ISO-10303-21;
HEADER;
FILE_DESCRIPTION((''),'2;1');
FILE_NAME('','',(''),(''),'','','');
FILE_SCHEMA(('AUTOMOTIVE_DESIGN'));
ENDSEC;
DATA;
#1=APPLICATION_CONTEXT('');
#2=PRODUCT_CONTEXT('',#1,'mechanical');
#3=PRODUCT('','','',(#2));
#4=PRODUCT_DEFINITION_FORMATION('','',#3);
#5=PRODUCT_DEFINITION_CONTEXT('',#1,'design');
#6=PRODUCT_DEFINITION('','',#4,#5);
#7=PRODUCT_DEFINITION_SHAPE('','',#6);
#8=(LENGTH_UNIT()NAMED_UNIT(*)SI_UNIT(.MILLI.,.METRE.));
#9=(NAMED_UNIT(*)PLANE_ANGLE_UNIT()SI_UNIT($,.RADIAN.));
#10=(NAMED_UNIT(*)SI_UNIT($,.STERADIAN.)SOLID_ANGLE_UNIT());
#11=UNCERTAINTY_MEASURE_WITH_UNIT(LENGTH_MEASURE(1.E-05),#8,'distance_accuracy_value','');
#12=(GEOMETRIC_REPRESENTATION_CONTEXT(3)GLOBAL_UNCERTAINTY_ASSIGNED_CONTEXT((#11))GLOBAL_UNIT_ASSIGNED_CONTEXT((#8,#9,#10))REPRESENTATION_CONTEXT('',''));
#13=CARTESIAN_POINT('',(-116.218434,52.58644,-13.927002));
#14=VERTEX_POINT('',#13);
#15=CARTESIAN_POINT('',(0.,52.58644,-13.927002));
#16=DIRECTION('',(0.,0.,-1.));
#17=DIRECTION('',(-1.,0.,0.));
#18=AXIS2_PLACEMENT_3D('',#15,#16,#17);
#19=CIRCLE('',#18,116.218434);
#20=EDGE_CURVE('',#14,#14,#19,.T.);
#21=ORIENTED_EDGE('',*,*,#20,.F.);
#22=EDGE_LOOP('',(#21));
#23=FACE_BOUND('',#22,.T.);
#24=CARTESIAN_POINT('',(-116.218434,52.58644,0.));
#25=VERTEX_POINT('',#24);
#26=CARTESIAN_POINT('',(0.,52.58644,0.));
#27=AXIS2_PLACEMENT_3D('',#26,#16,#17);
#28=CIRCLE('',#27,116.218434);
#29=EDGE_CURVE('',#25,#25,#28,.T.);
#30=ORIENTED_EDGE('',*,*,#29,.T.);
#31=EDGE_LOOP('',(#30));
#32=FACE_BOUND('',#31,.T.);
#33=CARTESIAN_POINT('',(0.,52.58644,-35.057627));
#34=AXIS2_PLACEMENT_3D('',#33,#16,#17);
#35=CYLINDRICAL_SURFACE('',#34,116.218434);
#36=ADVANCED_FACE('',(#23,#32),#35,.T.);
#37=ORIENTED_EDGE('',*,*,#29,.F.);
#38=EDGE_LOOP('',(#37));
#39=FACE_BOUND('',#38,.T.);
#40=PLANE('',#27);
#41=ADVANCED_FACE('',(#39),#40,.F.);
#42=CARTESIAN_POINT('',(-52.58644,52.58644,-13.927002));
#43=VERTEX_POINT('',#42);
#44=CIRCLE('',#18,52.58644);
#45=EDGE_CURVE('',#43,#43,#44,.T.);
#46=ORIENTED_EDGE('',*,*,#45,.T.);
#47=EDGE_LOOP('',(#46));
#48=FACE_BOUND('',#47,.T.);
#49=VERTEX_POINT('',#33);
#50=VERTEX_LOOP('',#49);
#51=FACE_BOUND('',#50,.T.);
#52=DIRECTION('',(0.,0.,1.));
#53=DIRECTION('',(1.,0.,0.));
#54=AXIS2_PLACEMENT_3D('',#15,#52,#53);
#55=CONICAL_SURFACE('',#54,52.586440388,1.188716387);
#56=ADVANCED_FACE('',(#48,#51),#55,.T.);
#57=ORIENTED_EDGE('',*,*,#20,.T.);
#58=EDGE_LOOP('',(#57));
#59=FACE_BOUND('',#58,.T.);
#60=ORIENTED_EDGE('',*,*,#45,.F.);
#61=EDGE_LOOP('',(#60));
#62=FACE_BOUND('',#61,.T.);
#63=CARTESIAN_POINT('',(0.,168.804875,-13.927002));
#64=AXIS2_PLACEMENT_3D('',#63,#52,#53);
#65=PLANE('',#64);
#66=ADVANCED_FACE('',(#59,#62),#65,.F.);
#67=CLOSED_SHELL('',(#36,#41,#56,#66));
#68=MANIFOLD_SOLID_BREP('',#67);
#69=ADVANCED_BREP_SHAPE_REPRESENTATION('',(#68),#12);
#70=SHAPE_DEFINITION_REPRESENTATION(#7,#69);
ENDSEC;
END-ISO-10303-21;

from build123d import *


with BuildPart() as part:
    # Croquis1 → Revolución1 (revolve)
    with BuildSketch(Plane(origin=(0, 0, 0), x_dir=(0, 0, -1), z_dir=(1, 0, 0))):
        Polygon((0, 52.586440388), (0, -63.631994077), (13.927002477, -63.631994077), (13.927002477, 0), (35.057626926, 52.586440388), align=None)
    revolve(axis=Axis((0, 52.586440388, -35.057626926), (0, 0, 1)))


solid = part.part
